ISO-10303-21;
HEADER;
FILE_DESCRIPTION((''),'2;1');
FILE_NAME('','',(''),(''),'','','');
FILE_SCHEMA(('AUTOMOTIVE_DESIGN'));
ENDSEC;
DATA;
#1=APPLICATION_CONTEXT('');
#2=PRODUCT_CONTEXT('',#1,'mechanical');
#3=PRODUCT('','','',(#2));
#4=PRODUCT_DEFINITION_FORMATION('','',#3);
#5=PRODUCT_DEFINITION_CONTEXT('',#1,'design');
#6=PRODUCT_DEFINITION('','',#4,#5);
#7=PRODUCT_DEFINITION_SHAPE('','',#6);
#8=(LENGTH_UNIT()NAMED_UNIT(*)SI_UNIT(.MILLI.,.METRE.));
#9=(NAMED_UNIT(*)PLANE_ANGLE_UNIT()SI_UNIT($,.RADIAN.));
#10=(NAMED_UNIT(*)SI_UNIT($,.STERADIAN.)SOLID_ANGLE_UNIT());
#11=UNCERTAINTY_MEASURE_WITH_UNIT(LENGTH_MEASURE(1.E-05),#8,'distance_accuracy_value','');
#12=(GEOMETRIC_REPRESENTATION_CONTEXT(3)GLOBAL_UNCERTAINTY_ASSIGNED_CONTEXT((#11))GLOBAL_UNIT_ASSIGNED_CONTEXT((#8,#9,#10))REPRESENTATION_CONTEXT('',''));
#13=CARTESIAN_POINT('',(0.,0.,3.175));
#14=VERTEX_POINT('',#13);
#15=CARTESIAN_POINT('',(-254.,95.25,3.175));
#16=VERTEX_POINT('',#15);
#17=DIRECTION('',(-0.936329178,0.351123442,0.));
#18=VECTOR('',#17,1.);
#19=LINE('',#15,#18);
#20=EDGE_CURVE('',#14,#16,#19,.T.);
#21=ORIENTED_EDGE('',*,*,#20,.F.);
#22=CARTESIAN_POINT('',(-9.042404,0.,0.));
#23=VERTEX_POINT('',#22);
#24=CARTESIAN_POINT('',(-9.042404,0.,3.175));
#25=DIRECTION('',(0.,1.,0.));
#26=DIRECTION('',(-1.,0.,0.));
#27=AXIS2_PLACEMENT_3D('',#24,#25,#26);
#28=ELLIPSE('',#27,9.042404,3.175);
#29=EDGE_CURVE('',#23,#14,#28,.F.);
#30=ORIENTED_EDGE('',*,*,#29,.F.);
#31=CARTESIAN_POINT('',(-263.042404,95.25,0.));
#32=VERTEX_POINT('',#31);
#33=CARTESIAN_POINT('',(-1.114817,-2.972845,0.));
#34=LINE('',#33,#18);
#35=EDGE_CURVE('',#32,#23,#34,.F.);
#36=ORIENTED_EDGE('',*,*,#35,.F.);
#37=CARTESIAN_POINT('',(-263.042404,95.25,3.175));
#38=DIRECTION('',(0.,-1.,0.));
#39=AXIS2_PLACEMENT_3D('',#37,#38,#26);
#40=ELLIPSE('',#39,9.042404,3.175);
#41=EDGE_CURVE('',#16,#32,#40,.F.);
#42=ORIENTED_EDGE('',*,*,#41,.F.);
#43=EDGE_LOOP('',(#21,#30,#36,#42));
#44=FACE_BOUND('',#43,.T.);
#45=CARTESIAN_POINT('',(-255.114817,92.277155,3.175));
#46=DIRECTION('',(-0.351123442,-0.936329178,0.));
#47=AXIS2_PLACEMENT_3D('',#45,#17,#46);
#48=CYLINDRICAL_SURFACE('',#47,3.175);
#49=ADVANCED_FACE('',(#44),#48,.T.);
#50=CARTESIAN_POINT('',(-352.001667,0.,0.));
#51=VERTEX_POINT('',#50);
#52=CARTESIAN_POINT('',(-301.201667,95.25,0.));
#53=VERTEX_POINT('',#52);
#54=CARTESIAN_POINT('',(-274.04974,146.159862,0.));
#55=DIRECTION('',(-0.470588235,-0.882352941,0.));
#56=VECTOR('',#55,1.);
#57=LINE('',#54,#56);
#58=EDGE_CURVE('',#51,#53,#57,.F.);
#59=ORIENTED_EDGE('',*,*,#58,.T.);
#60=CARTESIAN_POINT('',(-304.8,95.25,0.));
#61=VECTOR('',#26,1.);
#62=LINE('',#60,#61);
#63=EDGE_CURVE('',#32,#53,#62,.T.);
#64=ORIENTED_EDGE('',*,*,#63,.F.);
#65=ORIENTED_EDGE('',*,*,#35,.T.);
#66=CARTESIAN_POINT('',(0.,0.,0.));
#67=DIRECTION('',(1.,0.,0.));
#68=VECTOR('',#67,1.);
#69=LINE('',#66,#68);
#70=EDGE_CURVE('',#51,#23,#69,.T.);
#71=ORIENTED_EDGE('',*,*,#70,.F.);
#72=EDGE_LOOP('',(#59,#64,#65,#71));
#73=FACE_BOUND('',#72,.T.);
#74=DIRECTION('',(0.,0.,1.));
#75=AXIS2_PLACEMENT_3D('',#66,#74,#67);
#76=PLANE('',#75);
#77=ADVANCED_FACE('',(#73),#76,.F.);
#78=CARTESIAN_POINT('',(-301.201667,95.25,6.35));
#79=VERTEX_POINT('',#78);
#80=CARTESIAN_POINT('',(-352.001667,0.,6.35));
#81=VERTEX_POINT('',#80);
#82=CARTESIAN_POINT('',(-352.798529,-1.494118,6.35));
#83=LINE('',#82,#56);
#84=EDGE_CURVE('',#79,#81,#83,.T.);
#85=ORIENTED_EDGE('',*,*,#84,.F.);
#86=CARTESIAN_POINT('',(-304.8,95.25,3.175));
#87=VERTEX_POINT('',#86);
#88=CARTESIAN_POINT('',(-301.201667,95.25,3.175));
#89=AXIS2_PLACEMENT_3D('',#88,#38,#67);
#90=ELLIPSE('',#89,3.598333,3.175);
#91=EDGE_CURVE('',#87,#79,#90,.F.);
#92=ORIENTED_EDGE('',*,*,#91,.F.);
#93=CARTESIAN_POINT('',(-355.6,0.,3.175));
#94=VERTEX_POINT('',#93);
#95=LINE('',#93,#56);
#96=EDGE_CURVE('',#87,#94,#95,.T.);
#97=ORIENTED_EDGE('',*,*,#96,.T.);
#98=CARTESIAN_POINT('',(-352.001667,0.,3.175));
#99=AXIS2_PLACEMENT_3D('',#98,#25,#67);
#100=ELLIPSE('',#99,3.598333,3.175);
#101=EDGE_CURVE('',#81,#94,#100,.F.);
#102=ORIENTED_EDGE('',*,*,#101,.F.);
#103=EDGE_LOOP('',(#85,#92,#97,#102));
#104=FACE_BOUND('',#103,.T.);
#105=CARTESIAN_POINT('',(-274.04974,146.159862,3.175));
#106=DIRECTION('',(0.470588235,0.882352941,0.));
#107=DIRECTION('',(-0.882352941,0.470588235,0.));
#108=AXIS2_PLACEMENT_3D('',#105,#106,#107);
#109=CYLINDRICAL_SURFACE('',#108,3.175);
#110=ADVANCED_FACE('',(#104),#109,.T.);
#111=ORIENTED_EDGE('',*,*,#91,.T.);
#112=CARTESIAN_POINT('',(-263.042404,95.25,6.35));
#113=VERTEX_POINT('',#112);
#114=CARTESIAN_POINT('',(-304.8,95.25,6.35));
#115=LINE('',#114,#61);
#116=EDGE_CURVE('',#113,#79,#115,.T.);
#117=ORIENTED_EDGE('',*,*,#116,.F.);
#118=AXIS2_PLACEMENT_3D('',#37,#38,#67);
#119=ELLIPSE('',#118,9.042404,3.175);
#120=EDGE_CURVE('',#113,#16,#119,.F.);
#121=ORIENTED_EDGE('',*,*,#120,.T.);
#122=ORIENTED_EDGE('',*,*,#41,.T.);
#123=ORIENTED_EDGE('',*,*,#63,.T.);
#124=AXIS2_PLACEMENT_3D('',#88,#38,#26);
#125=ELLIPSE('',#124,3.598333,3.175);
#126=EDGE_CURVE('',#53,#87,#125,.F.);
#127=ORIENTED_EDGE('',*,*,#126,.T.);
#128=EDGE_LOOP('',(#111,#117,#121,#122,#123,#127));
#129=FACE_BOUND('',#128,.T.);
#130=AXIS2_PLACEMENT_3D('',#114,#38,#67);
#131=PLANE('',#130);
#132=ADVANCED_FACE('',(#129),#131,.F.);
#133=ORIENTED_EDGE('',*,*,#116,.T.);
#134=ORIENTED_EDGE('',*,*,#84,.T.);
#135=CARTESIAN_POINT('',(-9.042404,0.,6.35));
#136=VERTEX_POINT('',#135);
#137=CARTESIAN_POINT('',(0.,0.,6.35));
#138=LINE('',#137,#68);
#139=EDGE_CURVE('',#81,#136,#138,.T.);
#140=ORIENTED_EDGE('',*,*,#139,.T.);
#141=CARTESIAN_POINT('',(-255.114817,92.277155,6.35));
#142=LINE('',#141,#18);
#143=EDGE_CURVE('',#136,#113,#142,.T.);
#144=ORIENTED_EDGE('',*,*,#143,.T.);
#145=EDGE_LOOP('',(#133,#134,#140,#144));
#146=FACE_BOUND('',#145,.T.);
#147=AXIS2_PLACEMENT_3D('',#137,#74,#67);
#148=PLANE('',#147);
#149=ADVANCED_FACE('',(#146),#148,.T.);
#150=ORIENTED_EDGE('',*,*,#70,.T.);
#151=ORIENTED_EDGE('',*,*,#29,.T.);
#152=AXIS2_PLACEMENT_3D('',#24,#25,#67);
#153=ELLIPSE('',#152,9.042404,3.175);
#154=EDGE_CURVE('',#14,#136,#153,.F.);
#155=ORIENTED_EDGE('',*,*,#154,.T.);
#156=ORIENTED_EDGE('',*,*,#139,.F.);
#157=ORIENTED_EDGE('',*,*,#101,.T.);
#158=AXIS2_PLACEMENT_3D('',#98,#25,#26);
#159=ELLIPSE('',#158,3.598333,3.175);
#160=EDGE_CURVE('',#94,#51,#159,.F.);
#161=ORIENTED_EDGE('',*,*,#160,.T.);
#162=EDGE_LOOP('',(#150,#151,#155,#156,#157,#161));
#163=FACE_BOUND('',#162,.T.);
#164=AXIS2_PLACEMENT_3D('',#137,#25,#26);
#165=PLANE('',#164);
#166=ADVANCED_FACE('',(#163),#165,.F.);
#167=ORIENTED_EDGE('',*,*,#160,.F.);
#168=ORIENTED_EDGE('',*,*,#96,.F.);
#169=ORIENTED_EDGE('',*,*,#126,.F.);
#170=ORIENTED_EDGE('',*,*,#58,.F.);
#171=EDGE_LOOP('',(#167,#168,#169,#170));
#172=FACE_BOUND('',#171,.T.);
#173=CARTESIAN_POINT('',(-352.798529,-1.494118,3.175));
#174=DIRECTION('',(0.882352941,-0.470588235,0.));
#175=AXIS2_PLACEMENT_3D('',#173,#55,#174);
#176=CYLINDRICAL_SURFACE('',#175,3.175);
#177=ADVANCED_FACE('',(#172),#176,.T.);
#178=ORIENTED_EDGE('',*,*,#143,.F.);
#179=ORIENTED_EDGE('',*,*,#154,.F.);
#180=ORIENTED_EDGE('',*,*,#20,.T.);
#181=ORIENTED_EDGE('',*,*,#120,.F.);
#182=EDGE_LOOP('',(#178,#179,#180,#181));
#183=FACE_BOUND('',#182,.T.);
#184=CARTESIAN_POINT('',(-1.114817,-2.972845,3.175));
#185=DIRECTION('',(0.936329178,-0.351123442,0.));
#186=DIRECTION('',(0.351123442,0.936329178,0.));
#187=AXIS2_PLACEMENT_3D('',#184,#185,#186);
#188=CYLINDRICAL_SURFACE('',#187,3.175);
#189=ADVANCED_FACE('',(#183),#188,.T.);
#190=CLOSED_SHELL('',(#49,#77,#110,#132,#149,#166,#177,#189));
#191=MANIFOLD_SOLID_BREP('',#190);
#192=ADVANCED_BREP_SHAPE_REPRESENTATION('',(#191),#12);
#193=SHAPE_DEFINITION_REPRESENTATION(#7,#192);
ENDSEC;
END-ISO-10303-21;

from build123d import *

# Parameters (mm, degrees)
BOSS_EXTRUDE1_DEPTH = 6.35
FILLET1_R           = 3.175


with BuildPart() as part:
    # Sketch1 → Boss-Extrude1 (new body)
    with BuildSketch(Plane.XY):
        Polygon((0, 0), (-355.6, 0), (-304.8, 95.25), (-254, 95.25), align=None)
    extrude(amount=BOSS_EXTRUDE1_DEPTH)

    # Fillet1
    fillet1_edges = [part.edges().sort_by_distance(p)[0] for p in [
        (-330.2, 47.625, 6.35),
        (-330.2, 47.625, 0),
        (-127, 47.625, 6.35),
        (-127, 47.625, 0),
    ]]
    fillet(fillet1_edges, radius=FILLET1_R - 0.0001)  # a hair under: the kernel refuses the full size


solid = part.part
